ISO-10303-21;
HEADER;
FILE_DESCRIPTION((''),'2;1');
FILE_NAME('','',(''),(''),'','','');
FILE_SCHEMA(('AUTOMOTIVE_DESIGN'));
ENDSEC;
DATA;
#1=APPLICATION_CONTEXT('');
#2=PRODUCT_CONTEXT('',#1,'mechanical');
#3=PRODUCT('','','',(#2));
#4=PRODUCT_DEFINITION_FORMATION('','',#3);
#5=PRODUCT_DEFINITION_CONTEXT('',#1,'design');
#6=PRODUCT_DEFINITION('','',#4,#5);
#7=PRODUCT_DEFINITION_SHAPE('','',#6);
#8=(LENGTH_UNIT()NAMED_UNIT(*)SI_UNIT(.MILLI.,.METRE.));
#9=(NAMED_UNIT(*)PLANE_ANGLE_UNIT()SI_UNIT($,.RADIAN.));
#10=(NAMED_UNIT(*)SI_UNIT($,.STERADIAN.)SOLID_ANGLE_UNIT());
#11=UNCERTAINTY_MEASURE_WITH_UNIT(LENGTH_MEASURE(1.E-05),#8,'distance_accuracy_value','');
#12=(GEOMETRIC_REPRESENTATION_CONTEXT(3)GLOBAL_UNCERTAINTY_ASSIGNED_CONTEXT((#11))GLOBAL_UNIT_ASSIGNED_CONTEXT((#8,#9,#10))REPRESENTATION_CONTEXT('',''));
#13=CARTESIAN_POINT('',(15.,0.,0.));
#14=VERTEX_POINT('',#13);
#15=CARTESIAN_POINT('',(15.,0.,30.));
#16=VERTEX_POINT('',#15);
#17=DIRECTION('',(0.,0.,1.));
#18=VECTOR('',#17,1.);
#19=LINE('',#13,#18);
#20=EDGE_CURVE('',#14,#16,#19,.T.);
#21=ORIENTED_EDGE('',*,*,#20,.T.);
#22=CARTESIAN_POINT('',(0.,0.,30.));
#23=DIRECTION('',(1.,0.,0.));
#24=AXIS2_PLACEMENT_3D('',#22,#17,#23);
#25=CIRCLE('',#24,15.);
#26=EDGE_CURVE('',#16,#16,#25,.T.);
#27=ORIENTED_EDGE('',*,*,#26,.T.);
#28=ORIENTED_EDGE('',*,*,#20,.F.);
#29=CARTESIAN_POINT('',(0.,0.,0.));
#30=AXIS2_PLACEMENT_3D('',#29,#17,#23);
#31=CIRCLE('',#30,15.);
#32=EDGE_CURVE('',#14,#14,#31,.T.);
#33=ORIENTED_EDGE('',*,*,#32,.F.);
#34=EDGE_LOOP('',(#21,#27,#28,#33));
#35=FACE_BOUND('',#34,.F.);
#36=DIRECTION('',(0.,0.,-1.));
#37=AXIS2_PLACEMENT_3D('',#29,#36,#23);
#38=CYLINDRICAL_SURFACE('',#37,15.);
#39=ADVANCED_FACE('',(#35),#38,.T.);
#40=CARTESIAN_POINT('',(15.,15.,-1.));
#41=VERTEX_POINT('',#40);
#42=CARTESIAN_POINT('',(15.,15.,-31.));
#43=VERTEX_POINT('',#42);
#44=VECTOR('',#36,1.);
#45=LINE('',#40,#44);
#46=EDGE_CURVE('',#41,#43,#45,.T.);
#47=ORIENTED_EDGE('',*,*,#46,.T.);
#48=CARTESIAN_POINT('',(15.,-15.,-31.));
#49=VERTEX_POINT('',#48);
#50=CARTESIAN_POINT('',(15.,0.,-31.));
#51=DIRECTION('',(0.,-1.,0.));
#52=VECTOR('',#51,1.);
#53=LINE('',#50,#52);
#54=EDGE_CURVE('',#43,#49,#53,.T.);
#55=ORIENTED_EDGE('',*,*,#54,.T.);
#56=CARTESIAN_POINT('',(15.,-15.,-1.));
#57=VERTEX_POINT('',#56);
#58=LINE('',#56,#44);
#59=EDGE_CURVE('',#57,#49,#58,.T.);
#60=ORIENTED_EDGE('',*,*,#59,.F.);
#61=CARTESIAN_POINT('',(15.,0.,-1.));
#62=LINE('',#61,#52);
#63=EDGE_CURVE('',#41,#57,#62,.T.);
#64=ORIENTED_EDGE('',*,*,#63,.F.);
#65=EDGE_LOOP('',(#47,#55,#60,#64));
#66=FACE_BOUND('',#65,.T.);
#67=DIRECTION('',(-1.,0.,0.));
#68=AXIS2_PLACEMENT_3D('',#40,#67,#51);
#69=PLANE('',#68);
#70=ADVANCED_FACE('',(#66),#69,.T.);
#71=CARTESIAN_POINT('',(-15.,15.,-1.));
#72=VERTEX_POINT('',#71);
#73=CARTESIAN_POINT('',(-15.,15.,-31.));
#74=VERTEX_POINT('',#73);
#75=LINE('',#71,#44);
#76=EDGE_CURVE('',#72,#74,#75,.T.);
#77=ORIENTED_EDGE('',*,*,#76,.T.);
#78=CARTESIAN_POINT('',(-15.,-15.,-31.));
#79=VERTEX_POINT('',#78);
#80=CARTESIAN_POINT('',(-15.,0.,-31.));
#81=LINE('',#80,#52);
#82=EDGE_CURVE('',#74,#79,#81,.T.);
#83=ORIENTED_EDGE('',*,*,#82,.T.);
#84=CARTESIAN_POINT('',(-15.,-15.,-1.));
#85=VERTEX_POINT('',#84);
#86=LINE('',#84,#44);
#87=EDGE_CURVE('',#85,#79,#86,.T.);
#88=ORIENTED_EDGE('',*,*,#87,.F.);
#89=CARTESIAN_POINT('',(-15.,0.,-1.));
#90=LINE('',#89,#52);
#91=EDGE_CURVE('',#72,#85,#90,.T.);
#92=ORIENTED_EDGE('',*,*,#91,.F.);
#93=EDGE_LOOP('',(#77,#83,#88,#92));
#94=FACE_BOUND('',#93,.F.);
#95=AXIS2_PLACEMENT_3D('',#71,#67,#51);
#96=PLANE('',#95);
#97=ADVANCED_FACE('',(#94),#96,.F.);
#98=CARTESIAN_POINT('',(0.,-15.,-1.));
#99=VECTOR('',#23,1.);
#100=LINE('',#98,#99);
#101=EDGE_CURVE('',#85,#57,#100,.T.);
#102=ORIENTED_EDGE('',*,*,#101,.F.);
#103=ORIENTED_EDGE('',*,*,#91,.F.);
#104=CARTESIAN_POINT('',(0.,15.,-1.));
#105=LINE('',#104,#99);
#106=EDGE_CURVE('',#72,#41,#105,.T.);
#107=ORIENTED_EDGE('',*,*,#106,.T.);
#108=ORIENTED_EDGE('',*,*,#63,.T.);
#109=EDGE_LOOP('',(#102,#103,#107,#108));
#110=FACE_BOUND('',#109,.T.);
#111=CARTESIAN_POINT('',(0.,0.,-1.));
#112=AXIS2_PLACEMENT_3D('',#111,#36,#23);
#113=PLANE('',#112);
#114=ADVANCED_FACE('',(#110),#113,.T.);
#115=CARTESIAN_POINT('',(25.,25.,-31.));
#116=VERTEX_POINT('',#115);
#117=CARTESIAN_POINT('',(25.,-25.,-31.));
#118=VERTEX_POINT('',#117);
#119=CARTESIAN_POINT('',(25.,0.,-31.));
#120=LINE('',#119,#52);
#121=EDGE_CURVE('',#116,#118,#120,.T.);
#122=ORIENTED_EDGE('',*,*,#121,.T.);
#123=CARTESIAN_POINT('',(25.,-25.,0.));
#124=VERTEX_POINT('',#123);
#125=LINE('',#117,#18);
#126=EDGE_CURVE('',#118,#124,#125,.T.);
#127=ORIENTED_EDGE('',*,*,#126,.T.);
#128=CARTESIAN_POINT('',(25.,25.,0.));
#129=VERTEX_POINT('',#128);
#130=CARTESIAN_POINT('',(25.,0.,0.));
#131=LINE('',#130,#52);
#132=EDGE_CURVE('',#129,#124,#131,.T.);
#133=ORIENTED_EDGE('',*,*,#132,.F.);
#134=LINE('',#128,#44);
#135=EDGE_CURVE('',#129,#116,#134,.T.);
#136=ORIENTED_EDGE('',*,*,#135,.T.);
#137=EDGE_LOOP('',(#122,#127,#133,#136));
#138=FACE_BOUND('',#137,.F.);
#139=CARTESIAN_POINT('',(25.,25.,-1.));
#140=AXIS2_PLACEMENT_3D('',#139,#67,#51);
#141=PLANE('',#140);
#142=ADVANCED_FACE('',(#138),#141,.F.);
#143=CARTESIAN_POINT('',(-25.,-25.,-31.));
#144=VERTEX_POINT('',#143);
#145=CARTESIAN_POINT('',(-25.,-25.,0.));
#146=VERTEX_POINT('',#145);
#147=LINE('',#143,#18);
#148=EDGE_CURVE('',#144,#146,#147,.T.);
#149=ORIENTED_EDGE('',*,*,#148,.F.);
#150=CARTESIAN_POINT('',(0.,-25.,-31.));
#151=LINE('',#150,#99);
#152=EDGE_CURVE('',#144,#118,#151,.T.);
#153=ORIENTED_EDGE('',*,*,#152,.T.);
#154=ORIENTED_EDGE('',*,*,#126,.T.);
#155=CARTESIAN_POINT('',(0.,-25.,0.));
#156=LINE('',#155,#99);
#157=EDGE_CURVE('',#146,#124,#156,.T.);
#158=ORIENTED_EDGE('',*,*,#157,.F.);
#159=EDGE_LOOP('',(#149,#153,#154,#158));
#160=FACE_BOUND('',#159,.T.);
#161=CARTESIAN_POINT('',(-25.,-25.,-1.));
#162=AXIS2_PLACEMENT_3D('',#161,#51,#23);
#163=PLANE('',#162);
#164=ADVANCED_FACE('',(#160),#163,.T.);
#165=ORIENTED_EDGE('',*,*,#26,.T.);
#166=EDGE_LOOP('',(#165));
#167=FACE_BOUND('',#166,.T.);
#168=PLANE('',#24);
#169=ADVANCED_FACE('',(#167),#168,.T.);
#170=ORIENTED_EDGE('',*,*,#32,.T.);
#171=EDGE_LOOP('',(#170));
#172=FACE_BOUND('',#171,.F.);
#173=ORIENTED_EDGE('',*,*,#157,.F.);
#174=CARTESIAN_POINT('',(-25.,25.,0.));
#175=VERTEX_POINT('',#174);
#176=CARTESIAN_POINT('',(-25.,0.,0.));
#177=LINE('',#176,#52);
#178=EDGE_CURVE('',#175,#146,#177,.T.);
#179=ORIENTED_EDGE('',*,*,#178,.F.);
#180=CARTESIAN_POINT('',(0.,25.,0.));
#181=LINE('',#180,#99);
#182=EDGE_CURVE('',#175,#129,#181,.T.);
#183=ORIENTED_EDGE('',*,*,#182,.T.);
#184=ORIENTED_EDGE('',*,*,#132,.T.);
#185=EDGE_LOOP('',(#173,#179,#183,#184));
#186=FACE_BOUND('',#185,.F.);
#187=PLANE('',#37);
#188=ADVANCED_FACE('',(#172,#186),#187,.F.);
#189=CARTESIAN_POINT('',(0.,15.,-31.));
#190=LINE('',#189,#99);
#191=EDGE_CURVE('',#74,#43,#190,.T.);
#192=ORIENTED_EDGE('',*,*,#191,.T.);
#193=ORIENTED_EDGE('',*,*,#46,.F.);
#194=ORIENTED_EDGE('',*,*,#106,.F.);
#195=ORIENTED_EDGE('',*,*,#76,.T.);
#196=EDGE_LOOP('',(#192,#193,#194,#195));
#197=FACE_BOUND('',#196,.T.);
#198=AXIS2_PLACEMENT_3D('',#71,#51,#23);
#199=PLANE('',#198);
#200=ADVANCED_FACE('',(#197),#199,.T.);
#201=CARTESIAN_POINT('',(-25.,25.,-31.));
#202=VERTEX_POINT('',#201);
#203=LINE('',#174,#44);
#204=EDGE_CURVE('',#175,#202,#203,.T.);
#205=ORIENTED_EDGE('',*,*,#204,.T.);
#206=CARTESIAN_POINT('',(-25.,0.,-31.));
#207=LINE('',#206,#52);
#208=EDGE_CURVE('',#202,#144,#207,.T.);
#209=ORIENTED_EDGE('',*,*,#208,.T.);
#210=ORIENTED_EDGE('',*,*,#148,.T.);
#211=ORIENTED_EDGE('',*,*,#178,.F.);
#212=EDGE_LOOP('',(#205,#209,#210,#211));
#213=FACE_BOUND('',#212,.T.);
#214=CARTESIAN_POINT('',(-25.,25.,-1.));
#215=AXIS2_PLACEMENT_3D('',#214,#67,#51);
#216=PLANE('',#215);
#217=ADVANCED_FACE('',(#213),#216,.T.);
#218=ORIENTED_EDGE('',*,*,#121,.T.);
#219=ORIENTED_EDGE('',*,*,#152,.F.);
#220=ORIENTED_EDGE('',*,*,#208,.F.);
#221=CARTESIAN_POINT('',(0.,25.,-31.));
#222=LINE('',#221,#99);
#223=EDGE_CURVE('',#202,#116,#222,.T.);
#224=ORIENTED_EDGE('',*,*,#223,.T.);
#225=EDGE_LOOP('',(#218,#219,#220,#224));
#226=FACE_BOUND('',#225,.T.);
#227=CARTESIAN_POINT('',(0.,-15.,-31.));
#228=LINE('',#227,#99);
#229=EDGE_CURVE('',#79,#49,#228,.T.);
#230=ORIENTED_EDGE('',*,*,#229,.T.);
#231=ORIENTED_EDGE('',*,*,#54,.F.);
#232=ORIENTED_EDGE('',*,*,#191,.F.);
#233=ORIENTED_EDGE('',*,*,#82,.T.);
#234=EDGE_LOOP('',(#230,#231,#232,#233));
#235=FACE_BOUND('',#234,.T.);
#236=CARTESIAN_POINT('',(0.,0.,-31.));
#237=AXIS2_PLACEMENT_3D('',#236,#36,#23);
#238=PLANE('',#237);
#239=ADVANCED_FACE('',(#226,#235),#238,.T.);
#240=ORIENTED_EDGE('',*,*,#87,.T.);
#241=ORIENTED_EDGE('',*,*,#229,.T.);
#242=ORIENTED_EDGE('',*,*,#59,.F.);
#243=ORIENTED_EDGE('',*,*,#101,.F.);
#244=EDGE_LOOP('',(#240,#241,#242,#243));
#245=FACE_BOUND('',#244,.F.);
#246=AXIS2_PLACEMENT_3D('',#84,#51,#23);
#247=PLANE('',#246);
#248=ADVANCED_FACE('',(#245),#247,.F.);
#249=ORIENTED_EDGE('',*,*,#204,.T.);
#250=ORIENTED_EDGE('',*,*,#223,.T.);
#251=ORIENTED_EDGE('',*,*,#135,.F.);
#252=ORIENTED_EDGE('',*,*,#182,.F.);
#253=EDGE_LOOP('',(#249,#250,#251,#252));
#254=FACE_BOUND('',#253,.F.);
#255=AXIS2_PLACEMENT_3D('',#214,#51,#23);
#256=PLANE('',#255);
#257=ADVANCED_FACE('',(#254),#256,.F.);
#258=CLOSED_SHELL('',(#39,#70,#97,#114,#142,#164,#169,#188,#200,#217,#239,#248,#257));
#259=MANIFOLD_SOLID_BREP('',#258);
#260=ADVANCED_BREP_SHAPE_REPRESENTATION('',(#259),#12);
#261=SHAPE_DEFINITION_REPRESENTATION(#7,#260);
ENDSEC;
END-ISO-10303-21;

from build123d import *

# Parameters (mm, degrees)
F0_R     = 15
F1_DEPTH = 30
F2_W     = 50
F2_H     = 50
F3_DEPTH = 1
F4_W     = 50
F4_H     = 50
F4_W_2   = 30
F4_H_2   = 30
F5_DEPTH = 30


with BuildPart() as f1:
    # F0 (on Top) → F1 (new body)
    with BuildSketch(Plane.XY):
        Circle(F0_R)
    extrude(amount=F1_DEPTH)

    # F2 (on face) → F3 (join)
    with BuildSketch(Plane(origin=(0, 0, 0), x_dir=(1, 0, 0), z_dir=(0, 0, -1))):
        Rectangle(F2_W, F2_H)
        Polygon((15, 0), (15, -15), (0, -15), (-15, -15), (-15, 3.9e-09), (-15, 15), (0, 15), (15, 15), align=None, mode=Mode.SUBTRACT)
        with BuildLine():
            Line((0, -15), (15, -15))
            Line((15, -15), (15, 0))
            ThreePointArc((15, 0), (10.6066017178, -10.6066017178), (0, -15))
        make_face()
        with BuildLine():
            Line((-15, -15), (0, -15))
            ThreePointArc((0, -15), (-10.6066017192, -10.6066017164), (-15, 3.9e-09))
            Line((-15, 3.9e-09), (-15, -15))
        make_face()
        with BuildLine():
            ThreePointArc((-15, 3.9e-09), (-10.6066017192, -10.6066017164), (0, -15))
            ThreePointArc((0, -15), (10.6066017178, -10.6066017178), (15, 0))
            ThreePointArc((15, 0), (10.6066017178, 10.6066017178), (0, 15))
            ThreePointArc((0, 15), (-10.6066017164, 10.6066017192), (-15, 3.9e-09))
        make_face()
        with BuildLine():
            ThreePointArc((0, 15), (10.6066017178, 10.6066017178), (15, 0))
            Line((15, 0), (15, 15))
            Line((15, 15), (0, 15))
        make_face()
        with BuildLine():
            Line((-15, 15), (-15, 3.9e-09))
            ThreePointArc((-15, 3.9e-09), (-10.6066017164, 10.6066017192), (0, 15))
            Line((0, 15), (-15, 15))
        make_face()
    extrude(amount=F3_DEPTH)

    # F4 (on face) → F5 (join)
    with BuildSketch(Plane(origin=(0, 0, -1), x_dir=(1, 0, 0), z_dir=(0, 0, -1))):
        Rectangle(F4_W, F4_H)
        Rectangle(F4_W_2, F4_H_2, mode=Mode.SUBTRACT)
    extrude(amount=F5_DEPTH)


solid = f1.part
